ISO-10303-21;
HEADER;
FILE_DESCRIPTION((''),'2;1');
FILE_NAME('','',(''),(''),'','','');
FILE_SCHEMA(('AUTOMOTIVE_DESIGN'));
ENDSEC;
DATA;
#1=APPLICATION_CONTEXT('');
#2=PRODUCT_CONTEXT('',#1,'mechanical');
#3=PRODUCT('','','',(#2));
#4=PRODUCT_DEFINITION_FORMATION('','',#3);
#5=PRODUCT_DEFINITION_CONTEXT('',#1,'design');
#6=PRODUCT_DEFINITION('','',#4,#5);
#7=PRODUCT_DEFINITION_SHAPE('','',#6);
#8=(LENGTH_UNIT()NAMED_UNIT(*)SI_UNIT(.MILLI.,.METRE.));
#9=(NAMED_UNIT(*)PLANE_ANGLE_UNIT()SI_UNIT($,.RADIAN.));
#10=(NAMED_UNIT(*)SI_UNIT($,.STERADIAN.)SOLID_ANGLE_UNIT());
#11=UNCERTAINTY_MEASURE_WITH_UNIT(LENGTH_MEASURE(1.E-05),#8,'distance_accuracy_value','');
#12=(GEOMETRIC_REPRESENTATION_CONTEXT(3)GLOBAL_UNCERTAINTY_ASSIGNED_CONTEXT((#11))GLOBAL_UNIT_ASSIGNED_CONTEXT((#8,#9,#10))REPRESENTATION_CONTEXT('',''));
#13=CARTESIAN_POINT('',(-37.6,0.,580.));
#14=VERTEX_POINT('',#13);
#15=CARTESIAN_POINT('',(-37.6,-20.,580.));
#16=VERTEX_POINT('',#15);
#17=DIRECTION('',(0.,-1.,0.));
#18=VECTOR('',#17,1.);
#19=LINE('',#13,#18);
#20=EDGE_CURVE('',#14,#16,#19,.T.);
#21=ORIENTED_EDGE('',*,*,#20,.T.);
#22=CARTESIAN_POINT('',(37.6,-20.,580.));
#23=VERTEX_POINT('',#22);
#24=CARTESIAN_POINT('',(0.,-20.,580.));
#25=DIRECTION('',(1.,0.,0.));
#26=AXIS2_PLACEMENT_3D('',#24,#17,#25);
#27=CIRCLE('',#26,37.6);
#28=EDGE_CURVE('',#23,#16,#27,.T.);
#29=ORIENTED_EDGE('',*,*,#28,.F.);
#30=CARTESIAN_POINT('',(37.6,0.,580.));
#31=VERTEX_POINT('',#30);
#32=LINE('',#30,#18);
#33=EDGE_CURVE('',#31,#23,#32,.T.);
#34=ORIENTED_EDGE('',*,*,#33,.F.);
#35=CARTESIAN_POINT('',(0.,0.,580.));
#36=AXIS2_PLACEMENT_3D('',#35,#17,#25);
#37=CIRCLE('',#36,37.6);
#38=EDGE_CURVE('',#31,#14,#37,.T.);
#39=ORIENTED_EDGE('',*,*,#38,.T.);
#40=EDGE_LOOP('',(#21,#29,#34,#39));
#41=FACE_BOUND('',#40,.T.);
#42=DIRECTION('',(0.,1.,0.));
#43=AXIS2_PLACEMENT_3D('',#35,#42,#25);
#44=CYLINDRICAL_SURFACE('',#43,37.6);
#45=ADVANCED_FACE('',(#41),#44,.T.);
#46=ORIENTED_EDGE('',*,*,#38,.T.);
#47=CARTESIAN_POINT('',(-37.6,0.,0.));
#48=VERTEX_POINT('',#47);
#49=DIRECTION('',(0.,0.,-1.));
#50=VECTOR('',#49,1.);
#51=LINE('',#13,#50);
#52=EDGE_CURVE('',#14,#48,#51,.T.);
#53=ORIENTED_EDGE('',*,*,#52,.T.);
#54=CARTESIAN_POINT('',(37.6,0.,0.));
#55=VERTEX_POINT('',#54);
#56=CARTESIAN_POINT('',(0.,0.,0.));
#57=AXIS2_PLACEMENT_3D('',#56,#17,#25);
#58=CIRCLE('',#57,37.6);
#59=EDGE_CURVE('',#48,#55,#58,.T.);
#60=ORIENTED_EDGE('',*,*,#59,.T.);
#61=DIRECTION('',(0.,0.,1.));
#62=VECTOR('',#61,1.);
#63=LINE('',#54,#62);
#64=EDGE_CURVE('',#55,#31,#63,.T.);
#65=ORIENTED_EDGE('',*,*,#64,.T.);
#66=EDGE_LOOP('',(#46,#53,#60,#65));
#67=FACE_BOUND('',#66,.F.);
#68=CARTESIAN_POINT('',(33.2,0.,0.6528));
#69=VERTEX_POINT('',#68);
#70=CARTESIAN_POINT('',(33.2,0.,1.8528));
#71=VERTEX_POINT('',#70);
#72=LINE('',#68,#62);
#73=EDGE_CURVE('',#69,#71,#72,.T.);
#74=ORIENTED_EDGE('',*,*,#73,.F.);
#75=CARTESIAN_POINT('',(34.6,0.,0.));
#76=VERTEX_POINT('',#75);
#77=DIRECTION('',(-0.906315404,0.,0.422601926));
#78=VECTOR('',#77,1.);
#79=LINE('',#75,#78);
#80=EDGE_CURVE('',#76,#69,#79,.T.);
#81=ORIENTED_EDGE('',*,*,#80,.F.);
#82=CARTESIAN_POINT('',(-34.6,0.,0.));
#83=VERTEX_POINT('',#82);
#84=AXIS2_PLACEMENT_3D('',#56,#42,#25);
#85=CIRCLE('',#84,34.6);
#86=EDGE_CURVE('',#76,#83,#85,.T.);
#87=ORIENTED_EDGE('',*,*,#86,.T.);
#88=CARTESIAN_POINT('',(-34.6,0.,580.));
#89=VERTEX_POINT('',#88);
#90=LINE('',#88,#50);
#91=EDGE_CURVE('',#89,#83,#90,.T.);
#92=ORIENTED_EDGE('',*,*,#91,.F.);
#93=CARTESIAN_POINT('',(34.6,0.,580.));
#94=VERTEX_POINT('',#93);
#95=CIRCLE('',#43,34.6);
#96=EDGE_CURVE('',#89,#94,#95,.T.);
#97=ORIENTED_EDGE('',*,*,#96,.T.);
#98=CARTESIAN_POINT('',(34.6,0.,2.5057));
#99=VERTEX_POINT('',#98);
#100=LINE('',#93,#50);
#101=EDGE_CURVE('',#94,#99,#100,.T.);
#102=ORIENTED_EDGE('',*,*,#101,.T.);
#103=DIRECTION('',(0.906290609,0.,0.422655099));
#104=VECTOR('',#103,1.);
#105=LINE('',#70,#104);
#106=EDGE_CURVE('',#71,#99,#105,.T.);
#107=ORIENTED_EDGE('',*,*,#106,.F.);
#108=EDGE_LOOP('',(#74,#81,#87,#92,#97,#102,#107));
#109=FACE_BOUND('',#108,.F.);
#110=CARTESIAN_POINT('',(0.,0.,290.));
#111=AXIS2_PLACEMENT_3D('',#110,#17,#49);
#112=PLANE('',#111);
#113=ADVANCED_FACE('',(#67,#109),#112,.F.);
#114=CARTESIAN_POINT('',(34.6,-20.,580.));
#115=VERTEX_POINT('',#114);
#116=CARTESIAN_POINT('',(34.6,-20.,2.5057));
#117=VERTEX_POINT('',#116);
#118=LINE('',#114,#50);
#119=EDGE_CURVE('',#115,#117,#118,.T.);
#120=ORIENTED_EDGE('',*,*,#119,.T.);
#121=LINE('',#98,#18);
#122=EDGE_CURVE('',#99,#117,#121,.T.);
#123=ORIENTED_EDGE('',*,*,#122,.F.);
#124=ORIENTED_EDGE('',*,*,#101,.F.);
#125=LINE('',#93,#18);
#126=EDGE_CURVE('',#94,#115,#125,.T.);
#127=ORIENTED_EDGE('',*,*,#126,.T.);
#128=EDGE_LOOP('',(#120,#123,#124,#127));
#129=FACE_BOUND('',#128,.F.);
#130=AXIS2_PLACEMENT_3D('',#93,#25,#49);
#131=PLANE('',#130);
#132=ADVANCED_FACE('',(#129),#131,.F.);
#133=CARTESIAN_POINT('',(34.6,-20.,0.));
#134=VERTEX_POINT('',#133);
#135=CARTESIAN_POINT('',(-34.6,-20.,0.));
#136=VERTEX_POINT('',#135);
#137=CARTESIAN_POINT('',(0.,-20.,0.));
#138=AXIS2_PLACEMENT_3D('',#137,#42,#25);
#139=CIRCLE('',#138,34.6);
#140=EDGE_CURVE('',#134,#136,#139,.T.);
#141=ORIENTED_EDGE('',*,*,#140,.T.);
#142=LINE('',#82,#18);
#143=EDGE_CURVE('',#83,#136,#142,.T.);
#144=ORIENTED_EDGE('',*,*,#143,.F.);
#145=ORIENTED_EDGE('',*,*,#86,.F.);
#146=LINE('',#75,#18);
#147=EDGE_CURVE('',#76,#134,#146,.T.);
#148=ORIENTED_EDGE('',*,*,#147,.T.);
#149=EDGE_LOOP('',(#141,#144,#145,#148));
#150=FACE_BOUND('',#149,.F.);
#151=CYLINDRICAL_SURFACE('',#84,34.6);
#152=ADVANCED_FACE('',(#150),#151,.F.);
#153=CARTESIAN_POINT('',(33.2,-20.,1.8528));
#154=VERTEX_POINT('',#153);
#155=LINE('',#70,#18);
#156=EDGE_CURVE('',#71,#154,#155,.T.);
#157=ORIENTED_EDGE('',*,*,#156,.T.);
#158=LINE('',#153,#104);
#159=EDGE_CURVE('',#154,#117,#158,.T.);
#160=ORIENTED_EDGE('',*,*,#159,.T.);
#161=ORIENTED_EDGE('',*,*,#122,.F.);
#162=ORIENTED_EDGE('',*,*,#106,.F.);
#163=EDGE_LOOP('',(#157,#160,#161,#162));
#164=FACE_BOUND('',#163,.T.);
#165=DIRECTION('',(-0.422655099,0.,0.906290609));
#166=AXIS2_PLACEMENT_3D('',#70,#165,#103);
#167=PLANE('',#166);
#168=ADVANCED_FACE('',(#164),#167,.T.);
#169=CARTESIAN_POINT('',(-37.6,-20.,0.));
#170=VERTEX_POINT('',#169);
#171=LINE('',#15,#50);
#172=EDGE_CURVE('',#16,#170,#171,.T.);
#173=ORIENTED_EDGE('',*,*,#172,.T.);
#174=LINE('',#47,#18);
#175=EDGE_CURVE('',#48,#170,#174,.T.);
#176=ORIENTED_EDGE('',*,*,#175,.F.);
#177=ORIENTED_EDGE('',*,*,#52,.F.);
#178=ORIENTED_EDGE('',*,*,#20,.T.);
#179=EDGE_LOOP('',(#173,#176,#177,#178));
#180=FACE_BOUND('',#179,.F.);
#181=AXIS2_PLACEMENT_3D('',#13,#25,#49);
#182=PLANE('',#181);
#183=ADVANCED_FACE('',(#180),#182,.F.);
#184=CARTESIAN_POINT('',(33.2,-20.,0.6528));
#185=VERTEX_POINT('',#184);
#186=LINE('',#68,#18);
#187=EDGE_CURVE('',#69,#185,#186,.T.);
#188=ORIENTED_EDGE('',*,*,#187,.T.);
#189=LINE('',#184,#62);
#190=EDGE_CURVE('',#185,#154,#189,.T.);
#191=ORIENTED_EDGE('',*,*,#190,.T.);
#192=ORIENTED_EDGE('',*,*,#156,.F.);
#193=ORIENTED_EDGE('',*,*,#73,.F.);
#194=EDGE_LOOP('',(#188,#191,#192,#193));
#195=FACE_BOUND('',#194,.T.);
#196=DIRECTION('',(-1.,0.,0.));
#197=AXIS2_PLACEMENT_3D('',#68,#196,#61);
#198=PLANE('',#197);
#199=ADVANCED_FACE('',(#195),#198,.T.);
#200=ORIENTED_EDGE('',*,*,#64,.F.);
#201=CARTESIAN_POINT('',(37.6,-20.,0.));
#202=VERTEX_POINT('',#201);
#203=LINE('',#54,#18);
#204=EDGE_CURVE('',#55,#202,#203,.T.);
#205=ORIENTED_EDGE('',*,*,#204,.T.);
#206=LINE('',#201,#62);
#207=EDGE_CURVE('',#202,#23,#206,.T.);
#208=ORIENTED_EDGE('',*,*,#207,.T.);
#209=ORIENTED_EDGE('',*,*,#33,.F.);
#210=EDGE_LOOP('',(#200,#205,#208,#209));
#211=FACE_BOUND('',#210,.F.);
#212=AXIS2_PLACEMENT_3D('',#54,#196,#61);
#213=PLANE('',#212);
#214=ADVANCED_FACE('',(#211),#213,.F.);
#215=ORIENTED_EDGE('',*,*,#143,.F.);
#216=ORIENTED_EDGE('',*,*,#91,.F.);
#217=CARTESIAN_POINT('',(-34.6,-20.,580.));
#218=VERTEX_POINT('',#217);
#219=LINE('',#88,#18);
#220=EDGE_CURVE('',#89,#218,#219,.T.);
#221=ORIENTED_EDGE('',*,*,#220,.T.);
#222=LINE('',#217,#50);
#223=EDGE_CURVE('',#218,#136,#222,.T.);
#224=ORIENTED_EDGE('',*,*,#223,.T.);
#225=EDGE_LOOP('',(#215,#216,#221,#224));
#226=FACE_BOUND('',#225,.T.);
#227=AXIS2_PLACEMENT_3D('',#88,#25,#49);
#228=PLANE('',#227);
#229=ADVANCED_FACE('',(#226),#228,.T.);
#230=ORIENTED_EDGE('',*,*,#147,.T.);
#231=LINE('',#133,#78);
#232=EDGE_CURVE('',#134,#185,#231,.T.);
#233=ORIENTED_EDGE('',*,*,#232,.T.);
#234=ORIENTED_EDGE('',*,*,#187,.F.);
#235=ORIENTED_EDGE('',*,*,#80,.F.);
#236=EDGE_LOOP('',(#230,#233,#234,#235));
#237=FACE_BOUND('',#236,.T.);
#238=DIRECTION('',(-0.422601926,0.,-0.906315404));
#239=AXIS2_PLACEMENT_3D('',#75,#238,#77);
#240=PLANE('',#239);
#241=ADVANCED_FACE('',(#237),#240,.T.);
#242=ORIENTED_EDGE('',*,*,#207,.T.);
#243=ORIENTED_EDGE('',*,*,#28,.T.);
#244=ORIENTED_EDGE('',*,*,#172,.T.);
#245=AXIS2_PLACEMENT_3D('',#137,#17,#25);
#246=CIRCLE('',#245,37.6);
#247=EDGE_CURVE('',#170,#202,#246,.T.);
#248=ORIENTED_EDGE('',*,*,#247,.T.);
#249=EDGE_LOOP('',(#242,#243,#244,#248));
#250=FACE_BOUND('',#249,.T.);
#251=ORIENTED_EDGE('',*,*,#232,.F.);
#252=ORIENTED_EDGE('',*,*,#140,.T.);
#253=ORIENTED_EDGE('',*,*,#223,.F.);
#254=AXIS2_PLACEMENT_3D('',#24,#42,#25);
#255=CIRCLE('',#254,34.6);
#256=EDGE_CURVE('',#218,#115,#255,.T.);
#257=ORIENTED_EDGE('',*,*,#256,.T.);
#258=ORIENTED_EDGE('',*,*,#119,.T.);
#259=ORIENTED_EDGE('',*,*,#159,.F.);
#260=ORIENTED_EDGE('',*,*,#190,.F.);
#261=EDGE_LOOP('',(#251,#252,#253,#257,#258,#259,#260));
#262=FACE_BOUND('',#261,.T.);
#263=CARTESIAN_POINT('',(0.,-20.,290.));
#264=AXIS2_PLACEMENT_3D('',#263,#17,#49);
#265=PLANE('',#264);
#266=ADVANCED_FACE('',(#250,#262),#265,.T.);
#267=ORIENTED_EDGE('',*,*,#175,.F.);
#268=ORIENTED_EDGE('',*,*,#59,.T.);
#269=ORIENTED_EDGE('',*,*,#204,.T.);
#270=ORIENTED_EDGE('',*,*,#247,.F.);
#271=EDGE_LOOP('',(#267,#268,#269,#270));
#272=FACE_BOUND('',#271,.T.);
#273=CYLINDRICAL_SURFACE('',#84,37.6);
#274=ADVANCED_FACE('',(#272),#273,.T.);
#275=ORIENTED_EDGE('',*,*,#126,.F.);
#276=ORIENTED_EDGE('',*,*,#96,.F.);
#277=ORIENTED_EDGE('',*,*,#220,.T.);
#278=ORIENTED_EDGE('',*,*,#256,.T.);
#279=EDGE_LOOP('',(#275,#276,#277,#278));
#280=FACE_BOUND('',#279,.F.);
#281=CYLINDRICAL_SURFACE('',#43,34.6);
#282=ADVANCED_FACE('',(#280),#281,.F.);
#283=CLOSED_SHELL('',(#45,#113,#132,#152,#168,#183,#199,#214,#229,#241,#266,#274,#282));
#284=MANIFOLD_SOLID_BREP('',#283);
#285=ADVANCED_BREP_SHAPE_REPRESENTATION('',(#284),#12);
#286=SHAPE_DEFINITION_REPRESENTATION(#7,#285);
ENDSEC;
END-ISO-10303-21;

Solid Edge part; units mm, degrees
sketch "Sketch1" plane through (0, 0, 0) normal (0, -1, 0) x (1, 0, 0)
  line L0 (37.6, 0) -> (37.6, 580)
  arc A0 (37.6, 580) -> (-37.6, 580) centre (0, 580) ccw
  line L1 (-37.6, 580) -> (-37.6, 0)
  arc A1 (-37.6, 0) -> (37.6, 0) centre (0, 0) ccw
  line L2 (34.6, 580) -> (34.6, 0)
  arc A2 (-34.6, 580) -> (34.6, 580) centre (0, 580) cw
  line L3 (-34.6, 580) -> (-34.6, 0)
  arc A3 (34.6, 0) -> (-34.6, 0) centre (0, 0) cw
extrude "Protrusion1" add sketch "Sketch1" along normal blind 20
sketch "Sketch2" plane through (0, 0, 0) normal (0, -1, 0) x (1, 0, 0)
  line L0 (33.2, 0.6528) -> (33.2, 1.8528)
  line L1 (33.2, 1.8528) -> (34.6, 2.5057)
  line L2 (34.6, 2.5057) -> (34.6, 0)
  line L3 (34.6, 0) -> (33.2, 0.6528)
extrude "Extrusionsausprägung_2" add sketch "Sketch2" along normal blind 20
pattern "Pattern1" [suppressed]
mirror "Mirror1" [suppressed]
